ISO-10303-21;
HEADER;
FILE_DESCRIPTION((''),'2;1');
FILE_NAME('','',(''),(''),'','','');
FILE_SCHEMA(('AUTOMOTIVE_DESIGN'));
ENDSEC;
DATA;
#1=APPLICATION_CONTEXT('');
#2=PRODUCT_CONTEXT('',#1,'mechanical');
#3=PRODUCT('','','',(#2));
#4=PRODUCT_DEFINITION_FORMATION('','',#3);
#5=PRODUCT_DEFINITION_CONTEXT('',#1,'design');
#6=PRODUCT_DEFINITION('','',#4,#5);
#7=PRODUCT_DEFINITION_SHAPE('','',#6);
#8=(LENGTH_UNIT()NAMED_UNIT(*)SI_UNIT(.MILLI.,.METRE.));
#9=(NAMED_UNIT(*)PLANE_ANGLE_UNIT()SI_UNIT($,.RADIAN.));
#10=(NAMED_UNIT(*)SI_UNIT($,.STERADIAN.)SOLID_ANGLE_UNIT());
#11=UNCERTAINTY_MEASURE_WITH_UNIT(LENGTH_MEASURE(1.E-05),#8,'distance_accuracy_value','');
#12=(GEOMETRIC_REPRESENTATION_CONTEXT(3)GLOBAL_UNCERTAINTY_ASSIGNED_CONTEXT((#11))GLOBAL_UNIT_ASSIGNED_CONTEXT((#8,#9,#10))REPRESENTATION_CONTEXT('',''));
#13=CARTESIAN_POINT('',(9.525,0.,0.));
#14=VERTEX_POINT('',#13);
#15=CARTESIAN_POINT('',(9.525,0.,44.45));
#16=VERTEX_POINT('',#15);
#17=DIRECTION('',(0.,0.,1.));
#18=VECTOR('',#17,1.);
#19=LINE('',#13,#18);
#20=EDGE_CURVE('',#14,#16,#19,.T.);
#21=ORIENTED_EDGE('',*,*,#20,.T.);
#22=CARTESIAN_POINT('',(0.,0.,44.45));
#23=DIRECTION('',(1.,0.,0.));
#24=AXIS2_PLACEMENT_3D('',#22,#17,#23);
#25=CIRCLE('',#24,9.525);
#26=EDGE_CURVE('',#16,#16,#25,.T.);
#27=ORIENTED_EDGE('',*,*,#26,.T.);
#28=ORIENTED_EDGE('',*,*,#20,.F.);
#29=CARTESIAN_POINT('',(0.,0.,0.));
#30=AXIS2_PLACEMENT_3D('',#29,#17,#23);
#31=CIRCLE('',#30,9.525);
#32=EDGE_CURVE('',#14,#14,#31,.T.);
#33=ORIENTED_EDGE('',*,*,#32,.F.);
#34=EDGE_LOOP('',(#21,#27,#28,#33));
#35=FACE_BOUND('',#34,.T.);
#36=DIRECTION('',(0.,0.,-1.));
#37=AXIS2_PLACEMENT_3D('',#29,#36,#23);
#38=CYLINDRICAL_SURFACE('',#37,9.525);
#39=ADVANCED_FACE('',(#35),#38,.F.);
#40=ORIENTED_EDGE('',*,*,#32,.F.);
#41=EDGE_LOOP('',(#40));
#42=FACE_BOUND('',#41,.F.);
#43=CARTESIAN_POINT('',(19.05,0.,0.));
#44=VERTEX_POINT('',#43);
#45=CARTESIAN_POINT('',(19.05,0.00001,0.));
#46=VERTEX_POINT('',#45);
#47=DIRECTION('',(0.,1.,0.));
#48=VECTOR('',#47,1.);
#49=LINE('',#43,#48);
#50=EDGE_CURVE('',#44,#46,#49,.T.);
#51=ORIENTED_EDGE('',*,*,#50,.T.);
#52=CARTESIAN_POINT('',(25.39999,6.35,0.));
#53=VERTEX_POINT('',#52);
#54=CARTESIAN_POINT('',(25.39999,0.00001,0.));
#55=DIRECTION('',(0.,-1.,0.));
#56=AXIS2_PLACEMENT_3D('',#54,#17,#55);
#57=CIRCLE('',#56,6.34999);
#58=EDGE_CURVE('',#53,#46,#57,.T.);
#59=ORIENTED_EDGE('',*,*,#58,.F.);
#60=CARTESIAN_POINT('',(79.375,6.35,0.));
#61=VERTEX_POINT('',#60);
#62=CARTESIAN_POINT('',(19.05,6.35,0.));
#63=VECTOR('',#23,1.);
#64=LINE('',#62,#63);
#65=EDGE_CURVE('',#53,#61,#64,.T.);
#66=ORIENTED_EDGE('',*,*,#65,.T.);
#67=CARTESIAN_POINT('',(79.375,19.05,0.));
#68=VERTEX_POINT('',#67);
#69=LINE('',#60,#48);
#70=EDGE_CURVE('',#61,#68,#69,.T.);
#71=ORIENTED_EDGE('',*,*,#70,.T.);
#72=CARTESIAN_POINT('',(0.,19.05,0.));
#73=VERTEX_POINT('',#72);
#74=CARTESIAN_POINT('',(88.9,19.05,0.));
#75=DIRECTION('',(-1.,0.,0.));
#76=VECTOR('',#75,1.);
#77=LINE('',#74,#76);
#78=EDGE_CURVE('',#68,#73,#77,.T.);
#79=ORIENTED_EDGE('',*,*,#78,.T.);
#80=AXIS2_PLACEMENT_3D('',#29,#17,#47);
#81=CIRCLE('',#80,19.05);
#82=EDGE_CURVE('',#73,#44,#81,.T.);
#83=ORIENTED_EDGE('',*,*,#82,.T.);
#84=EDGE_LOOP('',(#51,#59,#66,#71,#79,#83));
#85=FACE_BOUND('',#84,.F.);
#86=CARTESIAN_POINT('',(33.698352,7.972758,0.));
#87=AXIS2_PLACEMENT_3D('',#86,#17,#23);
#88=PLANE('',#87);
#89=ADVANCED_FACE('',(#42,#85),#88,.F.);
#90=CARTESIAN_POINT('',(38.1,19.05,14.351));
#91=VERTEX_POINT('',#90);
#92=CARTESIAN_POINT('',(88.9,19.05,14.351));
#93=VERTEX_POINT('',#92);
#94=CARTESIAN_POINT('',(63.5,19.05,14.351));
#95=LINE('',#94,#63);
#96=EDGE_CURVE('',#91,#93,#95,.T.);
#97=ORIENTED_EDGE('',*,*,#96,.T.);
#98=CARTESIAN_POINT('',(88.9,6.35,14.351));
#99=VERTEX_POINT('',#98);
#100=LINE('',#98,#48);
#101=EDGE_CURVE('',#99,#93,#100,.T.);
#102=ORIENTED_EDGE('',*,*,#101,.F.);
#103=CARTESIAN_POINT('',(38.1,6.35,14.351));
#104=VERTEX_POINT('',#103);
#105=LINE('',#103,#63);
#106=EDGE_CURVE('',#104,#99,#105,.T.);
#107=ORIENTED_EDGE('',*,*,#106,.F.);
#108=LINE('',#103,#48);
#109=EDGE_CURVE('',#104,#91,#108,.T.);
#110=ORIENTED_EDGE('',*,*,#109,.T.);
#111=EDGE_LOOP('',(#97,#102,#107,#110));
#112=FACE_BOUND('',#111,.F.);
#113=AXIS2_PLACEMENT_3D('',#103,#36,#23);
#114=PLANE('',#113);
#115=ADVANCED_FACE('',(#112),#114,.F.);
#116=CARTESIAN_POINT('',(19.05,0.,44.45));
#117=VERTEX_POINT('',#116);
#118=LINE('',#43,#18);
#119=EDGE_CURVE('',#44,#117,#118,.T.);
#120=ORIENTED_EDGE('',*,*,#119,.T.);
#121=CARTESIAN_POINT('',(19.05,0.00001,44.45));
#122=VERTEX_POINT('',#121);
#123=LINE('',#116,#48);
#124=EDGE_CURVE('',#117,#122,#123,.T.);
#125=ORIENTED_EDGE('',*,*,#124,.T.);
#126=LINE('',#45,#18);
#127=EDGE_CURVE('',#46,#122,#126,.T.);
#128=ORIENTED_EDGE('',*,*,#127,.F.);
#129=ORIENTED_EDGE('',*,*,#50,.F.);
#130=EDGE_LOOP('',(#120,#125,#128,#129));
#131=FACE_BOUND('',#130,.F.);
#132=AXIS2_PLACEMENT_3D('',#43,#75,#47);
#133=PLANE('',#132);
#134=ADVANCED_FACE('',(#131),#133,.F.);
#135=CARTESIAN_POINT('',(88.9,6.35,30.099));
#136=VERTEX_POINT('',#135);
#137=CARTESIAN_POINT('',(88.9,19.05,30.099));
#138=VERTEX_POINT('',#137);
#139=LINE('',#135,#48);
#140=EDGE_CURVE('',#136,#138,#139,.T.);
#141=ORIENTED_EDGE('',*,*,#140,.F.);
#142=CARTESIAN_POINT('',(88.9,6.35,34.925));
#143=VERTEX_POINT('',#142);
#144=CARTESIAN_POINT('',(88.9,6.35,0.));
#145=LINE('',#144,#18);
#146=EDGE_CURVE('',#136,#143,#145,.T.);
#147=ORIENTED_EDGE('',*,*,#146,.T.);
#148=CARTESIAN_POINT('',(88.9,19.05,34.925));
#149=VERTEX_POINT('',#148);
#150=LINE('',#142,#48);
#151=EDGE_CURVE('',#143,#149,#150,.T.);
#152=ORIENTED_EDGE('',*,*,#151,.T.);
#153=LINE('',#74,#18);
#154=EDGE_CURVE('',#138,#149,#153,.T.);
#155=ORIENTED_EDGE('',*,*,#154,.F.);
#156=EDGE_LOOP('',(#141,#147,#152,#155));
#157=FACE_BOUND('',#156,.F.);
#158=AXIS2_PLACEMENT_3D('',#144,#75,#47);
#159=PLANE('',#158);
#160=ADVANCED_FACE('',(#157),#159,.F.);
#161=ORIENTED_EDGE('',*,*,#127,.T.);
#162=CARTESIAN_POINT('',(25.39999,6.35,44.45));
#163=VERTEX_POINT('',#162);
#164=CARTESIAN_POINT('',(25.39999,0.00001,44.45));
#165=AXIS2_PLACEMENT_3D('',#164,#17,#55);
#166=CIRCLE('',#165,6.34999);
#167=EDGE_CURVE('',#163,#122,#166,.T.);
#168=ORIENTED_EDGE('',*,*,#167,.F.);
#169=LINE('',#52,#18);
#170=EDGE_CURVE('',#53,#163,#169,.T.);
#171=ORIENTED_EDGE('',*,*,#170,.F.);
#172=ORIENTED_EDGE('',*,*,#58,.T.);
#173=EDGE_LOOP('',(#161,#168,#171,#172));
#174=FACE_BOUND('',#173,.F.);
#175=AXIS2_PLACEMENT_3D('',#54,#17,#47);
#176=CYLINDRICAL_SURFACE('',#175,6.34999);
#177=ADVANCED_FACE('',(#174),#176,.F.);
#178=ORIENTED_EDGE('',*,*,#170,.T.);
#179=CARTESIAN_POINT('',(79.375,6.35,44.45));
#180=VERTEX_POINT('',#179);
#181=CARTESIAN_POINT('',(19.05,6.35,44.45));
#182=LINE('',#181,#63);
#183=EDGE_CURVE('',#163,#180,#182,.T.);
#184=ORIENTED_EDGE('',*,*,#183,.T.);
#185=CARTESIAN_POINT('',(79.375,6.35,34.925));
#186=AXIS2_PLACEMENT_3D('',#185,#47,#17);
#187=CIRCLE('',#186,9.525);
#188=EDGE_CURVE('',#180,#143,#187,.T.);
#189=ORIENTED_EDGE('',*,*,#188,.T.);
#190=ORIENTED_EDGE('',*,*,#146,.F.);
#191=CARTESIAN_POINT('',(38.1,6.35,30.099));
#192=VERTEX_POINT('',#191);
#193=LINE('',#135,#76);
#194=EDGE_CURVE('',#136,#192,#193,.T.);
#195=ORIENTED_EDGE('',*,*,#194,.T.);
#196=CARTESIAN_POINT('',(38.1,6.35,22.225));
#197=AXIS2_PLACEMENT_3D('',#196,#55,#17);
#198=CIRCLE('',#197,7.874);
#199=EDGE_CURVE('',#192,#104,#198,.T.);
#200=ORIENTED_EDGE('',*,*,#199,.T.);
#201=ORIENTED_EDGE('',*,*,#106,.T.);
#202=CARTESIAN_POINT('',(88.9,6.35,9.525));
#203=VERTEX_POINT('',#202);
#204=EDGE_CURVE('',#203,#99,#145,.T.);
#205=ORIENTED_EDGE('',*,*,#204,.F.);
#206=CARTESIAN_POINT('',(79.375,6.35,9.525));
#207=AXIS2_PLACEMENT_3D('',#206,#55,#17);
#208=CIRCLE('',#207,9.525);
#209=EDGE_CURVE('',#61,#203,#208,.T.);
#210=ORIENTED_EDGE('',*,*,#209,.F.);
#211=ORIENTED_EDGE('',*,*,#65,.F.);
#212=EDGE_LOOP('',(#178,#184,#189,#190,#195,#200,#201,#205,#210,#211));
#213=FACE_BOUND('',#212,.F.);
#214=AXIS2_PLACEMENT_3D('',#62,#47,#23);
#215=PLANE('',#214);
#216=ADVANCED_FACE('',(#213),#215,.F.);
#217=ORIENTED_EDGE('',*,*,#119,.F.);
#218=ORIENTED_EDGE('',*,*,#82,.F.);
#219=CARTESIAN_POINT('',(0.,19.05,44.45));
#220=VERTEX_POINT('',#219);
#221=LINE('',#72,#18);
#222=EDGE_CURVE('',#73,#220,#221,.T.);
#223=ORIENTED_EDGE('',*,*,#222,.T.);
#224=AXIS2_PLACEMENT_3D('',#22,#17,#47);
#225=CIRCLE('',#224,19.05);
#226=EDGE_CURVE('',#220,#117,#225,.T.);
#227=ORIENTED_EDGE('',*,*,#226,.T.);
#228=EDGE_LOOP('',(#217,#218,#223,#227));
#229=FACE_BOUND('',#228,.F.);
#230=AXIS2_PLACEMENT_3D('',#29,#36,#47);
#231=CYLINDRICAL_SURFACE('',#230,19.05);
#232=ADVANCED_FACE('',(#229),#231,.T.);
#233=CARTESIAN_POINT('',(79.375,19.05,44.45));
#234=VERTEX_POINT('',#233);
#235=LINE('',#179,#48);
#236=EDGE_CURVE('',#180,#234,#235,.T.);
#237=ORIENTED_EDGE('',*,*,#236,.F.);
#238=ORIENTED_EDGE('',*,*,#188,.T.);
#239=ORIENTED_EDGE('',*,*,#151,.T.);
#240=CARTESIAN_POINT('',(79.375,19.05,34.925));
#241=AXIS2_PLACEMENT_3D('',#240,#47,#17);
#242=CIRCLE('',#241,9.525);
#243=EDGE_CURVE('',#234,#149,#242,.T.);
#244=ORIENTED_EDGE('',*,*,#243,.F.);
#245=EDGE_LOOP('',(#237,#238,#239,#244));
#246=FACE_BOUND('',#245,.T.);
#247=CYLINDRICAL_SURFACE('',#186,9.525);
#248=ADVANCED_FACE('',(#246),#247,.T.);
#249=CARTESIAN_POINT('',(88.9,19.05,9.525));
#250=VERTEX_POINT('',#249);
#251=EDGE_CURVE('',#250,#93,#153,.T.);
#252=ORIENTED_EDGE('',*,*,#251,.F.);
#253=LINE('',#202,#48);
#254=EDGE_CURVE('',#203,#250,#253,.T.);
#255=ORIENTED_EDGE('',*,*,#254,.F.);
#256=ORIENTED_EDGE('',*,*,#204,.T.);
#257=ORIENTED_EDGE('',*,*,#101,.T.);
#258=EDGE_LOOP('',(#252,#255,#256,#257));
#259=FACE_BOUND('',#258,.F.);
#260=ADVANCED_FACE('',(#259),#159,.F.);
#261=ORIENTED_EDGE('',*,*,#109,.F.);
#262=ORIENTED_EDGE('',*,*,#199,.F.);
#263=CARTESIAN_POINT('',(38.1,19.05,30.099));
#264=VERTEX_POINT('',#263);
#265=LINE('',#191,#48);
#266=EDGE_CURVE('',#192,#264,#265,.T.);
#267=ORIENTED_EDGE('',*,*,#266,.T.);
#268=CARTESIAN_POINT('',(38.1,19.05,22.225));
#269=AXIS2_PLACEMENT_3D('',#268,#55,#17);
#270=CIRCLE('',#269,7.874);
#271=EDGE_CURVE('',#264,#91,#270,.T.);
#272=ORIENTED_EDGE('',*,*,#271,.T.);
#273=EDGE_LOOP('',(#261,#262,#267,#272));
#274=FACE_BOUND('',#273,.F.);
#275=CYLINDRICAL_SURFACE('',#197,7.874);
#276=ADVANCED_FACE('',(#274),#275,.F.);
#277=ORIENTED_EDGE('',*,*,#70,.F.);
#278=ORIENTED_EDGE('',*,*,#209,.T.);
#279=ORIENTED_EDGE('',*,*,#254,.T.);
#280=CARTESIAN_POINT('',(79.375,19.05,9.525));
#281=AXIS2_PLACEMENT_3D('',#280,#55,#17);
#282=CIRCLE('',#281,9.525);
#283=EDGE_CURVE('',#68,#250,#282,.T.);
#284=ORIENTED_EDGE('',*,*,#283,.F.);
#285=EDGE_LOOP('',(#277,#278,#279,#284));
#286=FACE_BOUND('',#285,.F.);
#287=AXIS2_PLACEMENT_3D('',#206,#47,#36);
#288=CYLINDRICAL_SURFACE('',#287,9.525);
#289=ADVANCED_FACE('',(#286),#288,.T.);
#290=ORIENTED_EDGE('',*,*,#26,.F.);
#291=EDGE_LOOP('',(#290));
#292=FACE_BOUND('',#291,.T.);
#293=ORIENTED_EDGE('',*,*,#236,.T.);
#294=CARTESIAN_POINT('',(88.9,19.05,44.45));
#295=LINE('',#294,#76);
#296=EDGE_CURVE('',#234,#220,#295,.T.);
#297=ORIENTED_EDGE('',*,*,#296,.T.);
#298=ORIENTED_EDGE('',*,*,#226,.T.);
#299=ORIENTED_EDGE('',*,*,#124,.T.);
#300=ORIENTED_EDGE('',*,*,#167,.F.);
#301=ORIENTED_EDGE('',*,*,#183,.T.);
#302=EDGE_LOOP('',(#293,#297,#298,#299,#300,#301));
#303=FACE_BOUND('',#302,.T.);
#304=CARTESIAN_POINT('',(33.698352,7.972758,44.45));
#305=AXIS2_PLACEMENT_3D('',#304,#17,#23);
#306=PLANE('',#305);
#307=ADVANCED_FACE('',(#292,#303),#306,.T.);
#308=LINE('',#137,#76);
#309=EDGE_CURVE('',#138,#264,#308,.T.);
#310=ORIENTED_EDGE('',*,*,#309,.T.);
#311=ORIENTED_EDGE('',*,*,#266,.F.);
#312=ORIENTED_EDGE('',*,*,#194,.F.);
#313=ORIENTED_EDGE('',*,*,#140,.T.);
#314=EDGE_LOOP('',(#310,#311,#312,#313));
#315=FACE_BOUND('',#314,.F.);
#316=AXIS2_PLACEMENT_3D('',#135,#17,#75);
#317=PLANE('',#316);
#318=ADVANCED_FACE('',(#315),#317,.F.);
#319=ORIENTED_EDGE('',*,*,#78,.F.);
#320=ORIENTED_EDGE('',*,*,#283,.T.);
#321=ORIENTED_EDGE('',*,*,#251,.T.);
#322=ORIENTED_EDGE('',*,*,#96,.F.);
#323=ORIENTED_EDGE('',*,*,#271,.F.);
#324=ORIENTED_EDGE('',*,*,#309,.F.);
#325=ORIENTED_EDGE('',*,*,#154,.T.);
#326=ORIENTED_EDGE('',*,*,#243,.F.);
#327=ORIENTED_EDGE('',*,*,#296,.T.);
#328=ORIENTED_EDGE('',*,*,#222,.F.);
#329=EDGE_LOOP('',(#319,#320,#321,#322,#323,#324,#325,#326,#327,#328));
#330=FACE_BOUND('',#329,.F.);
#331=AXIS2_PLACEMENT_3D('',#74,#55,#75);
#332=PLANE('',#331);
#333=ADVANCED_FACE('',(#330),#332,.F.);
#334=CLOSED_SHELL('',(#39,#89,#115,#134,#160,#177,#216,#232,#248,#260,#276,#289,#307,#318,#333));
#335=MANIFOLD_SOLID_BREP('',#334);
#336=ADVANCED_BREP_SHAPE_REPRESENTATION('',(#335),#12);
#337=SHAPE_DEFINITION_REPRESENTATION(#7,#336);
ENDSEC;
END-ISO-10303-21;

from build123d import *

# Parameters (mm, degrees)
F0_R     = 9.525
F1_DEPTH = 44.45
F3_DEPTH = 12.701
F4_R     = 6.34999
F5_R     = 9.525


# Not quite as in the source:
# - a fillet or chamfer is up to 0.001 mm smaller than in the source, because OpenCascade refuses the exact size


with BuildPart() as f1:
    # F0 (on Top) → F1 (new body)
    with BuildSketch(Plane.XY):
        with BuildLine():
            Line((88.9, 19.05), (0, 19.05))
            ThreePointArc((0, 19.05), (-13.4703841816, -13.4703841816), (19.05, 0))
            Line((19.05, 0), (19.05, 6.35))
            Line((19.05, 6.35), (88.9, 6.35))
            Line((88.9, 6.35), (88.9, 19.05))
        make_face()
        Circle(F0_R, mode=Mode.SUBTRACT)
    extrude(amount=F1_DEPTH)

    # F2 (on face) → F3 (cut, through all)
    with BuildSketch(Plane.XZ.offset(-6.35)):
        with BuildLine():
            Line((88.9, 30.099), (38.1, 30.099))
            ThreePointArc((38.1, 30.099), (30.226, 22.225), (38.1, 14.351))
            Line((38.1, 14.351), (88.9, 14.351))
            Line((88.9, 14.351), (88.9, 30.099))
        make_face()
    extrude(amount=-F3_DEPTH, mode=Mode.SUBTRACT)

    # F4 (radius 6.35 in the source; OpenCascade refuses exactly that, so slightly less here)
    f4_edges = [f1.edges().sort_by_distance(p)[0] for p in [
        (19.05, 6.35, 22.225),
    ]]
    fillet(f4_edges, radius=F4_R)

    # F5
    f5_edges = [f1.edges().sort_by_distance(p)[0] for p in [
        (88.9, 12.7, 0),
        (88.9, 12.7, 44.45),
    ]]
    fillet(f5_edges, radius=F5_R)


solid = f1.part
